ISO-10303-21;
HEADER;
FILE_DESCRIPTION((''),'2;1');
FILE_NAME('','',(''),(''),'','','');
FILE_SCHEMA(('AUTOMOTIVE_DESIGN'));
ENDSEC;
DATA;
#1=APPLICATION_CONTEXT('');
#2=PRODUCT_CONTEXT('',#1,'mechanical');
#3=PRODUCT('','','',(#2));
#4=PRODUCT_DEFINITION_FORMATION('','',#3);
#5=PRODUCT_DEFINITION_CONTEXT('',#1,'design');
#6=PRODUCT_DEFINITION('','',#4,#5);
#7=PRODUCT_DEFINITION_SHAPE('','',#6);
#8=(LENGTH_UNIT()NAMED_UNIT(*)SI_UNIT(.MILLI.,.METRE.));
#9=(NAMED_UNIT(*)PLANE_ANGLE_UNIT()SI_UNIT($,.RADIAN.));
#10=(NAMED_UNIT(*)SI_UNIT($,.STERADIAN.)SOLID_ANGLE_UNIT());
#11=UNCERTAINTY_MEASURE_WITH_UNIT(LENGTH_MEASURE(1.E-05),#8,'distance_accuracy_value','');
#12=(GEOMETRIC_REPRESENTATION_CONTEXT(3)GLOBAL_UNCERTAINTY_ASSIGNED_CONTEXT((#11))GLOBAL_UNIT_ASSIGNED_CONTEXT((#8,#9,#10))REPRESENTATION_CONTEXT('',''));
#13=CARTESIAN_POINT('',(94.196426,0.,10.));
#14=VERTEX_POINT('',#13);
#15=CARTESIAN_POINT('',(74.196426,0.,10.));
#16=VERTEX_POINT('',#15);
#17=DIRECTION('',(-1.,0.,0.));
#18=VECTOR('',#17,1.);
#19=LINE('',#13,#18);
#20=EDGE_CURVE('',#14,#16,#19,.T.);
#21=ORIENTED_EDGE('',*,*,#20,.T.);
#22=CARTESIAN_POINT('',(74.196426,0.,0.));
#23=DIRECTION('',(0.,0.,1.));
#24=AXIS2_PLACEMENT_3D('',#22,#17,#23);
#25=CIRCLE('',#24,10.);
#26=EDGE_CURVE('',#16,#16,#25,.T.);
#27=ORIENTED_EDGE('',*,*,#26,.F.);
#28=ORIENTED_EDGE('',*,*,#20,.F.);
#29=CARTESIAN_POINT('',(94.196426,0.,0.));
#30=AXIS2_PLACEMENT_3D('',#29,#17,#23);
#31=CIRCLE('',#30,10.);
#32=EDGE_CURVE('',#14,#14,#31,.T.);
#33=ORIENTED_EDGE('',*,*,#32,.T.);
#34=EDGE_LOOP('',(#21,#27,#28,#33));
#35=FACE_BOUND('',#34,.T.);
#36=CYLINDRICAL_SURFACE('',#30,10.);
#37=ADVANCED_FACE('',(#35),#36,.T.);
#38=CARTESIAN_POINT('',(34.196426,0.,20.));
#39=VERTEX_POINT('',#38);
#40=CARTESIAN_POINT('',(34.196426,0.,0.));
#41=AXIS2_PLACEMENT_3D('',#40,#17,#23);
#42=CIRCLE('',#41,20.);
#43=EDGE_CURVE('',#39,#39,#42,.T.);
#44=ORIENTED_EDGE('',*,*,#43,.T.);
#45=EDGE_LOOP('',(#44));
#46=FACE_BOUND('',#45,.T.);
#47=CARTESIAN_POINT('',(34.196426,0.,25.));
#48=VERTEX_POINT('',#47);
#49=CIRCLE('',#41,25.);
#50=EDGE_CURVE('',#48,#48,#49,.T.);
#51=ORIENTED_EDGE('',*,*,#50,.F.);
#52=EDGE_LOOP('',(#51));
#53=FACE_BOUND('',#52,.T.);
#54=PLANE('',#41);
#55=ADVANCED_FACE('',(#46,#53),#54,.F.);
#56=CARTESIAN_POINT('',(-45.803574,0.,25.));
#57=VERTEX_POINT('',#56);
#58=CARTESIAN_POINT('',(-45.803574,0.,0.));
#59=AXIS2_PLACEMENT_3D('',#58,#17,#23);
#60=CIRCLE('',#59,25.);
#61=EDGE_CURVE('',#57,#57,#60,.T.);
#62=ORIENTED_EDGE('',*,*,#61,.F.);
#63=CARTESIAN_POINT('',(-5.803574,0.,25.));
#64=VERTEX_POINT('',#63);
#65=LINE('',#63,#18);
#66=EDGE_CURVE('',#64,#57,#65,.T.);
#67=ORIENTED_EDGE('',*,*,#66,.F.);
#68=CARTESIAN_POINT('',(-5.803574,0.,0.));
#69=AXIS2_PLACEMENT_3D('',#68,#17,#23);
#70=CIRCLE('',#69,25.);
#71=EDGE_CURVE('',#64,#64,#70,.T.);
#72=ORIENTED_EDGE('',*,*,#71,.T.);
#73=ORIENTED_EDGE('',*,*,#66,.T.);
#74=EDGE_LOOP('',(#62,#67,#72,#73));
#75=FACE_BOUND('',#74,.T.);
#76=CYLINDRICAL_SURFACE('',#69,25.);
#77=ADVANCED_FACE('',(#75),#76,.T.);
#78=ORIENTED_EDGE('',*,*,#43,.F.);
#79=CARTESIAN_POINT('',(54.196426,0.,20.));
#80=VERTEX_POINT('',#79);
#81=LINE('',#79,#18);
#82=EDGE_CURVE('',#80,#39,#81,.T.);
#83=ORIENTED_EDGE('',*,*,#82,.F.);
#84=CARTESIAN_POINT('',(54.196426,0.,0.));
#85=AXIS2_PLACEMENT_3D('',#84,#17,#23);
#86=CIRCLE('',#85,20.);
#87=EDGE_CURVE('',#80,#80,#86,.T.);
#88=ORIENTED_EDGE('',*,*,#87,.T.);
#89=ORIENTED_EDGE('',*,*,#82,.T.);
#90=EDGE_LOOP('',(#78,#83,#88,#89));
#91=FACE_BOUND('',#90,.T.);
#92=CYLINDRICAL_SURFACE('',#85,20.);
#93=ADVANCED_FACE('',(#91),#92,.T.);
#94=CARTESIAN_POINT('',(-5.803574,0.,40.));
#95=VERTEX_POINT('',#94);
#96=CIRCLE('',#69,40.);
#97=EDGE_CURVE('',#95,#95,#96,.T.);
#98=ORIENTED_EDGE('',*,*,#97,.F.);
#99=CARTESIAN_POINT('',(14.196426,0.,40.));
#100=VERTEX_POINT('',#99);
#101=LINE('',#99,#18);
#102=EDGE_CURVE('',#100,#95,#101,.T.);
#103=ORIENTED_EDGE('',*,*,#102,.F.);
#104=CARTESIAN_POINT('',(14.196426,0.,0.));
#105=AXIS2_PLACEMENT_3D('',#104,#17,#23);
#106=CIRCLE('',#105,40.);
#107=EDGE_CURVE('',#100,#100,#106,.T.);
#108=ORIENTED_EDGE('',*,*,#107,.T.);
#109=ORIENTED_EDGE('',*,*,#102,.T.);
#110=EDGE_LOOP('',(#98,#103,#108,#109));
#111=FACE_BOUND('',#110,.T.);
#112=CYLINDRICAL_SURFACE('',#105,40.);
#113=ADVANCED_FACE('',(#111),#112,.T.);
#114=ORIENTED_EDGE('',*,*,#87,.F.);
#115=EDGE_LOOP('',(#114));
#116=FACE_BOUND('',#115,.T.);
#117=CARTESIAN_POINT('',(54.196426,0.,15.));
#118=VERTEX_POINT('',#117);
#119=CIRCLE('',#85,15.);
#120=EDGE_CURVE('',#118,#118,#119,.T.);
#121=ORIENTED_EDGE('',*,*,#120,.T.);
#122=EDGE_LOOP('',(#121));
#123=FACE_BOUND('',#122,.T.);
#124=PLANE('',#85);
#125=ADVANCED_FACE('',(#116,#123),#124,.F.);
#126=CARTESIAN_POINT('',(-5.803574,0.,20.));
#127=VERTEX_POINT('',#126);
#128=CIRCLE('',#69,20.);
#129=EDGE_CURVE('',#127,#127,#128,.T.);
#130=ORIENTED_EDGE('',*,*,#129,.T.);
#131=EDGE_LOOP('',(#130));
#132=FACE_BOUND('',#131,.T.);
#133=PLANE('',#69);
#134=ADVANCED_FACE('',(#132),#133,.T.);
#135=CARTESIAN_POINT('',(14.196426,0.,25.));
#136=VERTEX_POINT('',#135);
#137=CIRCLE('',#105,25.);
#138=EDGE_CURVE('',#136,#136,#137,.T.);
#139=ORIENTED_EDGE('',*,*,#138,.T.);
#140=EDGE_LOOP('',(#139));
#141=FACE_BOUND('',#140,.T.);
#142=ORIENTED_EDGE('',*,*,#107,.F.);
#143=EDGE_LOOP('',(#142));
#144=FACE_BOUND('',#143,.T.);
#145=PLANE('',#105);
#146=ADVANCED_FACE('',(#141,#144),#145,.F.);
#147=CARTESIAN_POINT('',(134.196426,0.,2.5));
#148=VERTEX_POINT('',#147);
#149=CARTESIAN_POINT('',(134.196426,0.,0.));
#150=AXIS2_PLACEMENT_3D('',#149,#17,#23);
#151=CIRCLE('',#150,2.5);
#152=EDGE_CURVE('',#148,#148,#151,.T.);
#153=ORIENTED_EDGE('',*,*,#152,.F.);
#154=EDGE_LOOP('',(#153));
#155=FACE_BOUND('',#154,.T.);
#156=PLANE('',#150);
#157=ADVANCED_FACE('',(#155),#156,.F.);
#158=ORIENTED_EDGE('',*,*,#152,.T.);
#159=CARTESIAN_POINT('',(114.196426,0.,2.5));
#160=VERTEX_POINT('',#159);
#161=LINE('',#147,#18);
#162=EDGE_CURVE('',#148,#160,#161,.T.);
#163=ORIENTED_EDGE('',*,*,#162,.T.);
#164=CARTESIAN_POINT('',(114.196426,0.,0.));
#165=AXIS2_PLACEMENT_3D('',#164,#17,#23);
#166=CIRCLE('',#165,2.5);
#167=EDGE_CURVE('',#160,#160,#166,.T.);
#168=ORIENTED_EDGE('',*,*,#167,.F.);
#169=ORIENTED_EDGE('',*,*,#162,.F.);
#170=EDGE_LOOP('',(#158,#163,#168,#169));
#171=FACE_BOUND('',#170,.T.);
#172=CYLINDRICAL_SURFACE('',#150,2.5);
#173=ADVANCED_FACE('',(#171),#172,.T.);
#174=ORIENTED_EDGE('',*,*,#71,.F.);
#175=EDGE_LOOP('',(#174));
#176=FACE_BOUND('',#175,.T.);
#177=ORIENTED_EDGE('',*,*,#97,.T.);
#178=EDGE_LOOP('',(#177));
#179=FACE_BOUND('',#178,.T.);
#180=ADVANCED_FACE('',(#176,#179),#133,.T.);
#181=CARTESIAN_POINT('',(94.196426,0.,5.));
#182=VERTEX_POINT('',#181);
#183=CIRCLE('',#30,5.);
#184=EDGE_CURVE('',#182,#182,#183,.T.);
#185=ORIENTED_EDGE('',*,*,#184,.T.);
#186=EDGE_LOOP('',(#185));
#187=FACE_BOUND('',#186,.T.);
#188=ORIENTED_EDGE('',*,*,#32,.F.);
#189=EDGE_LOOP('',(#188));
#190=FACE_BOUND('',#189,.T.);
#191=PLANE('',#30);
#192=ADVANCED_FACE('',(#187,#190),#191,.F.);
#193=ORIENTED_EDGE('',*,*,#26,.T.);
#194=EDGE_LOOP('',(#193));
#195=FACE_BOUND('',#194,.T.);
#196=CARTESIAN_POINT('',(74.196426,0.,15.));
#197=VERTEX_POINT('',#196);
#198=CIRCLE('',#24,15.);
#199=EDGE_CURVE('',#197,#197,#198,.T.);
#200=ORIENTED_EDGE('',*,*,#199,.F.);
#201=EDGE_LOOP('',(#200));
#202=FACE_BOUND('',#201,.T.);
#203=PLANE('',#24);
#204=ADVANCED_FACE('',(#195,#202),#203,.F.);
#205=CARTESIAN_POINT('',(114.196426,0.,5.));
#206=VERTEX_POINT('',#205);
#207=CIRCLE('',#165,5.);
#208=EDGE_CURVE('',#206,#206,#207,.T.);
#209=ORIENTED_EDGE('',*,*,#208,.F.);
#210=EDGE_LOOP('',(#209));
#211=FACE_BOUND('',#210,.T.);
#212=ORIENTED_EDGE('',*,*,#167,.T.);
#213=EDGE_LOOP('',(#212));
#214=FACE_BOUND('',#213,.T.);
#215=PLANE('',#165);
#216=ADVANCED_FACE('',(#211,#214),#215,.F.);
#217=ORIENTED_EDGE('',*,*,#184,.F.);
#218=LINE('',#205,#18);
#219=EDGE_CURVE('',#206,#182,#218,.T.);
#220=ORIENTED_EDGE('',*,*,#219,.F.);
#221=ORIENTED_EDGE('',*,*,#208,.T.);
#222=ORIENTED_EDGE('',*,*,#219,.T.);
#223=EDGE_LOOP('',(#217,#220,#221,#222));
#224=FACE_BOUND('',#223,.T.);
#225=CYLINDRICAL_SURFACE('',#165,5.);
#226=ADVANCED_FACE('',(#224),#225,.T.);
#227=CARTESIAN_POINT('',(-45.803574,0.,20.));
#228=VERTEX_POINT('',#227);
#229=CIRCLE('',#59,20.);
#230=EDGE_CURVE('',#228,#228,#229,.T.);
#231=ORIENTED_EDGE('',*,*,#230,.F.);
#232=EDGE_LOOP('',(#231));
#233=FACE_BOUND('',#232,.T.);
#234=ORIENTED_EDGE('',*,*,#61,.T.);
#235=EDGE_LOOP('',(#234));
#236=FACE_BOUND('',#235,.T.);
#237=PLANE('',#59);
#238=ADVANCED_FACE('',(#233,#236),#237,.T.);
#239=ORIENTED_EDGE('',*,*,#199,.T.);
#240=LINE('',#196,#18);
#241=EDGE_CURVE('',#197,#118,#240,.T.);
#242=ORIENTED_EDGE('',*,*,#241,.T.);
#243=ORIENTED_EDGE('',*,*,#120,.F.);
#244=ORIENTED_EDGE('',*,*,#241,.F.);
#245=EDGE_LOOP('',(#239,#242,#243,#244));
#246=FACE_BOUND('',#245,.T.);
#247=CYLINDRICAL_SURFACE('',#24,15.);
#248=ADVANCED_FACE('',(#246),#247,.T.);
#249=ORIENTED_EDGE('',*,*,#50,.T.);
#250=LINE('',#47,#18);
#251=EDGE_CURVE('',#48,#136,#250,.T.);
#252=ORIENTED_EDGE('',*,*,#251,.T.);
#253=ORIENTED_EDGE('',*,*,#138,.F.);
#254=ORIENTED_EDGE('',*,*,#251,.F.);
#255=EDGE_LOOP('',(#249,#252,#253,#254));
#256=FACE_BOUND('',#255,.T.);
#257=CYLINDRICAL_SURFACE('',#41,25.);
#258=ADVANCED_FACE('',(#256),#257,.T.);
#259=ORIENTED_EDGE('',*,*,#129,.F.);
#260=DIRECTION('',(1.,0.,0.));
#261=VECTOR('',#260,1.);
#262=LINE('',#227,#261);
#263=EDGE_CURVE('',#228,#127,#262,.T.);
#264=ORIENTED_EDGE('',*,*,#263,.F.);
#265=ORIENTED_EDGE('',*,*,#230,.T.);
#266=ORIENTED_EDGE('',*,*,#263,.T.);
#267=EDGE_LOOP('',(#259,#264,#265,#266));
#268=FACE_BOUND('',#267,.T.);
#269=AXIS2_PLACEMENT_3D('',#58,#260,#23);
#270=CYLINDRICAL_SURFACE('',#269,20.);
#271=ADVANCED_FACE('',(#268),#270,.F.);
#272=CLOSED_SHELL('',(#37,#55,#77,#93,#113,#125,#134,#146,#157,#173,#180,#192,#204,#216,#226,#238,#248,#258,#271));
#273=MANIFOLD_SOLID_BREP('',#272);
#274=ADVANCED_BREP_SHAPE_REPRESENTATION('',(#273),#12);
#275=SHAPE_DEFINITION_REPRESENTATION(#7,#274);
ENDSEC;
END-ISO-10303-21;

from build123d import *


# Not quite as in the source:
# - the program builds the solid bodies; features that only make, move or delete a surface that nothing else refers to are left out


with BuildPart() as f1:
    # F0 (on Front) → F1 (revolve)
    with BuildSketch(Plane.XZ):
        Polygon((-45.8035738753, 25), (-45.8035738753, 20), (-5.8035738753, 20), (-5.8035738753, 0), (134.1964261247, 0), (134.1964261247, 2.5), (114.1964261247, 2.5), (114.1964261247, 5), (94.1964261247, 5), (94.1964261247, 10), (74.1964261247, 10), (74.1964261247, 15), (54.1964261247, 15), (54.1964261247, 20), (34.1964261247, 20), (34.1964261247, 25), (14.1964261247, 25), (14.1964261247, 40), (-5.8035738753, 40), (-5.8035738753, 25), align=None)
    revolve(axis=Axis((44.1964261247, 0, 0), (-1, 0, 0)))


solid = f1.part
